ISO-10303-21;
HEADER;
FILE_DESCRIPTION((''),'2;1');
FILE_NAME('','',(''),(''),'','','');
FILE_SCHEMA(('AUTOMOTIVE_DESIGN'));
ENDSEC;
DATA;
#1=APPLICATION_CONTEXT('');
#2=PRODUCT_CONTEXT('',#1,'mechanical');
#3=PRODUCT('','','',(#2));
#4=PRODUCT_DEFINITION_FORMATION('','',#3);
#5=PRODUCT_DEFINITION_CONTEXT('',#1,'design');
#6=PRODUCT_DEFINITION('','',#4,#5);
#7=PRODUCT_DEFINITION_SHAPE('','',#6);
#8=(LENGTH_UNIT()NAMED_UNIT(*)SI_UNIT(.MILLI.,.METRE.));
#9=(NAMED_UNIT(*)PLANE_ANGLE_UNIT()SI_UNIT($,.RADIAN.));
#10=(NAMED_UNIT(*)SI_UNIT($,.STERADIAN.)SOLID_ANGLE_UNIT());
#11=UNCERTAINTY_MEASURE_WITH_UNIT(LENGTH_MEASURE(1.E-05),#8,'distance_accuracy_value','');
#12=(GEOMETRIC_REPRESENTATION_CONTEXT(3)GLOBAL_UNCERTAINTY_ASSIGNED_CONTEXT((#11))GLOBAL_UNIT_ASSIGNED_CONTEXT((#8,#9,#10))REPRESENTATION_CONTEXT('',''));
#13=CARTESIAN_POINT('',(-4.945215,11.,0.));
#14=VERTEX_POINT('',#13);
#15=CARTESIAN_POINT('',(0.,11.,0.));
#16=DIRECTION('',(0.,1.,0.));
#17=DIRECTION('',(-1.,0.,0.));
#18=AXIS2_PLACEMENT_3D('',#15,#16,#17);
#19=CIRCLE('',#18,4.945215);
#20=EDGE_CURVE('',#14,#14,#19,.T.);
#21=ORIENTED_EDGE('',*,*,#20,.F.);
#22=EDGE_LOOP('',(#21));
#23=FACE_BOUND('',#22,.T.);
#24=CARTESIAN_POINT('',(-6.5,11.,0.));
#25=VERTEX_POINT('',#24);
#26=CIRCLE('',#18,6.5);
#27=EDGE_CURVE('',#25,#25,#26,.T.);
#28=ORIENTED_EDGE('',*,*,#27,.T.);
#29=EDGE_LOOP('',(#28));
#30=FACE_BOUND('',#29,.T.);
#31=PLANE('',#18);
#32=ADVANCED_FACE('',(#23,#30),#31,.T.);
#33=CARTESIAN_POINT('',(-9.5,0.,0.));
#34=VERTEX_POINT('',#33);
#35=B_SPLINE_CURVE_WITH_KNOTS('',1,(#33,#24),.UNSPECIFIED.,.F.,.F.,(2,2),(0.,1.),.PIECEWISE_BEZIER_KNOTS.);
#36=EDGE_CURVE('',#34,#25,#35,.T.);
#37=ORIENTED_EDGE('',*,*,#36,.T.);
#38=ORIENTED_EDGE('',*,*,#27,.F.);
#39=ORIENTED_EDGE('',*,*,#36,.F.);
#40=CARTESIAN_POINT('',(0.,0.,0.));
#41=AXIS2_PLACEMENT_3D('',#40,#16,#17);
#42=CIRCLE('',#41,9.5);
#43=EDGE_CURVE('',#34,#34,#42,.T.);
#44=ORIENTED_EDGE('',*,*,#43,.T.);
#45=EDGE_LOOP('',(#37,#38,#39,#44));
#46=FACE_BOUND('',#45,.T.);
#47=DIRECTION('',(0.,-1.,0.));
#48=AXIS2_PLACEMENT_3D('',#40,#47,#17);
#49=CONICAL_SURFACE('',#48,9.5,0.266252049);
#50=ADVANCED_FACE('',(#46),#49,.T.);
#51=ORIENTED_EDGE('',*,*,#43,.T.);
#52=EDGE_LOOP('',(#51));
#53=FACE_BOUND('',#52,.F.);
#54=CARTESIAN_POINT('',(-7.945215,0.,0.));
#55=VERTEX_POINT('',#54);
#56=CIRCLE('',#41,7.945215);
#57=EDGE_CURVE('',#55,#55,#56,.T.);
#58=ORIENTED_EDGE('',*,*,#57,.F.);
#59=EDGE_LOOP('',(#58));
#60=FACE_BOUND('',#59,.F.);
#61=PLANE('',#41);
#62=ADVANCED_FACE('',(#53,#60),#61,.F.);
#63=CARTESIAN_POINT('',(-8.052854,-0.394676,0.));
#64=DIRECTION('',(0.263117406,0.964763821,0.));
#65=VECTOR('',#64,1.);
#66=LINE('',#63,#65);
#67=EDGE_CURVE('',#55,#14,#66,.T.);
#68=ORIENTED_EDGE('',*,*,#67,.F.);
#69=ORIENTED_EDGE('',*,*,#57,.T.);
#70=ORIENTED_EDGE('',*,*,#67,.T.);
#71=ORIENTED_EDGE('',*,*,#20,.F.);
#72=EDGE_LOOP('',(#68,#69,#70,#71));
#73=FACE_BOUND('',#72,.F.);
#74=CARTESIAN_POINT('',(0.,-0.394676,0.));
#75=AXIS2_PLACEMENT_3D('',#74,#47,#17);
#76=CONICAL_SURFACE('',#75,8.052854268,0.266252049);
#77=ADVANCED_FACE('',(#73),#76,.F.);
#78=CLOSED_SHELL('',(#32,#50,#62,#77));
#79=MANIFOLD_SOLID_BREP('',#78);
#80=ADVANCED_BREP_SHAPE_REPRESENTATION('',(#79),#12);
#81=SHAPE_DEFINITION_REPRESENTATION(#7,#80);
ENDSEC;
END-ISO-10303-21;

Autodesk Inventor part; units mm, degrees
ref_plane "YZ Plane" through (0, 0, 0) normal (1, 0, 0) x (0, 1, 0)
ref_plane "XY Plane" through (0, 0, 0) normal (0, 0, 1) x (1, 0, 0)
sketch "Szkic6" plane through (0, 0, 0) normal (0, 1, 0) x (-1, 0, 0)
  circle A0 centre (0, 0) radius 9.5
  dimension "d33" = 19
ref_plane "Płaszczyzna konstrukcyjna1" through (0, 11, 0) normal (0, 1, 0) x (-1, 0, 0)
sketch "Szkic7" plane through (0, 11, 0) normal (0, 1, 0) x (-1, 0, 0)
  circle A0 centre (0, 0) radius 6.5
  dimension "d35" = 13
loft "Wyciągnięcie złożone1" add profiles "Szkic6", "Szkic7"
shell "Skorupa1" thickness 1.5 removed faces 2 at (-1.6847, 11, 1.9553) at (0.3595, 0, 2.9609)
equation "\"d33\" = OD1"
equation "\"d35\" = OD2"
equation "\"d52\" = THK"
equation "\"SzerokośćGięciaPodcięcia\" = Grubość"
equation "\"RozmiarPodcięciaNarożnika\" = 4 * Grubość"
equation "\"PromieńPrzejścia\" = PromieńGięcia"
equation "\"Rozmiar_promienia_Jacobiego\" = PromieńGięcia"
equation "\"Wielk_odstępu\" = Grubość"
equation "\"d2\" = PromieńGięcia"
equation "\"d23\" = PromieńGięcia"
equation "\"OD1\" = 19"
equation "\"OD2\" = 13"
equation "\"L\" = 11"
equation "\"THK\" = 1.5"
equation "\"d34\" = L"
equation "\"Grubość\" = 1.5"
equation "\"PromieńGięcia\" = 3"
properties part number "Redukcja symetryczna Ø19x13x1,5 L=11" material "304"
